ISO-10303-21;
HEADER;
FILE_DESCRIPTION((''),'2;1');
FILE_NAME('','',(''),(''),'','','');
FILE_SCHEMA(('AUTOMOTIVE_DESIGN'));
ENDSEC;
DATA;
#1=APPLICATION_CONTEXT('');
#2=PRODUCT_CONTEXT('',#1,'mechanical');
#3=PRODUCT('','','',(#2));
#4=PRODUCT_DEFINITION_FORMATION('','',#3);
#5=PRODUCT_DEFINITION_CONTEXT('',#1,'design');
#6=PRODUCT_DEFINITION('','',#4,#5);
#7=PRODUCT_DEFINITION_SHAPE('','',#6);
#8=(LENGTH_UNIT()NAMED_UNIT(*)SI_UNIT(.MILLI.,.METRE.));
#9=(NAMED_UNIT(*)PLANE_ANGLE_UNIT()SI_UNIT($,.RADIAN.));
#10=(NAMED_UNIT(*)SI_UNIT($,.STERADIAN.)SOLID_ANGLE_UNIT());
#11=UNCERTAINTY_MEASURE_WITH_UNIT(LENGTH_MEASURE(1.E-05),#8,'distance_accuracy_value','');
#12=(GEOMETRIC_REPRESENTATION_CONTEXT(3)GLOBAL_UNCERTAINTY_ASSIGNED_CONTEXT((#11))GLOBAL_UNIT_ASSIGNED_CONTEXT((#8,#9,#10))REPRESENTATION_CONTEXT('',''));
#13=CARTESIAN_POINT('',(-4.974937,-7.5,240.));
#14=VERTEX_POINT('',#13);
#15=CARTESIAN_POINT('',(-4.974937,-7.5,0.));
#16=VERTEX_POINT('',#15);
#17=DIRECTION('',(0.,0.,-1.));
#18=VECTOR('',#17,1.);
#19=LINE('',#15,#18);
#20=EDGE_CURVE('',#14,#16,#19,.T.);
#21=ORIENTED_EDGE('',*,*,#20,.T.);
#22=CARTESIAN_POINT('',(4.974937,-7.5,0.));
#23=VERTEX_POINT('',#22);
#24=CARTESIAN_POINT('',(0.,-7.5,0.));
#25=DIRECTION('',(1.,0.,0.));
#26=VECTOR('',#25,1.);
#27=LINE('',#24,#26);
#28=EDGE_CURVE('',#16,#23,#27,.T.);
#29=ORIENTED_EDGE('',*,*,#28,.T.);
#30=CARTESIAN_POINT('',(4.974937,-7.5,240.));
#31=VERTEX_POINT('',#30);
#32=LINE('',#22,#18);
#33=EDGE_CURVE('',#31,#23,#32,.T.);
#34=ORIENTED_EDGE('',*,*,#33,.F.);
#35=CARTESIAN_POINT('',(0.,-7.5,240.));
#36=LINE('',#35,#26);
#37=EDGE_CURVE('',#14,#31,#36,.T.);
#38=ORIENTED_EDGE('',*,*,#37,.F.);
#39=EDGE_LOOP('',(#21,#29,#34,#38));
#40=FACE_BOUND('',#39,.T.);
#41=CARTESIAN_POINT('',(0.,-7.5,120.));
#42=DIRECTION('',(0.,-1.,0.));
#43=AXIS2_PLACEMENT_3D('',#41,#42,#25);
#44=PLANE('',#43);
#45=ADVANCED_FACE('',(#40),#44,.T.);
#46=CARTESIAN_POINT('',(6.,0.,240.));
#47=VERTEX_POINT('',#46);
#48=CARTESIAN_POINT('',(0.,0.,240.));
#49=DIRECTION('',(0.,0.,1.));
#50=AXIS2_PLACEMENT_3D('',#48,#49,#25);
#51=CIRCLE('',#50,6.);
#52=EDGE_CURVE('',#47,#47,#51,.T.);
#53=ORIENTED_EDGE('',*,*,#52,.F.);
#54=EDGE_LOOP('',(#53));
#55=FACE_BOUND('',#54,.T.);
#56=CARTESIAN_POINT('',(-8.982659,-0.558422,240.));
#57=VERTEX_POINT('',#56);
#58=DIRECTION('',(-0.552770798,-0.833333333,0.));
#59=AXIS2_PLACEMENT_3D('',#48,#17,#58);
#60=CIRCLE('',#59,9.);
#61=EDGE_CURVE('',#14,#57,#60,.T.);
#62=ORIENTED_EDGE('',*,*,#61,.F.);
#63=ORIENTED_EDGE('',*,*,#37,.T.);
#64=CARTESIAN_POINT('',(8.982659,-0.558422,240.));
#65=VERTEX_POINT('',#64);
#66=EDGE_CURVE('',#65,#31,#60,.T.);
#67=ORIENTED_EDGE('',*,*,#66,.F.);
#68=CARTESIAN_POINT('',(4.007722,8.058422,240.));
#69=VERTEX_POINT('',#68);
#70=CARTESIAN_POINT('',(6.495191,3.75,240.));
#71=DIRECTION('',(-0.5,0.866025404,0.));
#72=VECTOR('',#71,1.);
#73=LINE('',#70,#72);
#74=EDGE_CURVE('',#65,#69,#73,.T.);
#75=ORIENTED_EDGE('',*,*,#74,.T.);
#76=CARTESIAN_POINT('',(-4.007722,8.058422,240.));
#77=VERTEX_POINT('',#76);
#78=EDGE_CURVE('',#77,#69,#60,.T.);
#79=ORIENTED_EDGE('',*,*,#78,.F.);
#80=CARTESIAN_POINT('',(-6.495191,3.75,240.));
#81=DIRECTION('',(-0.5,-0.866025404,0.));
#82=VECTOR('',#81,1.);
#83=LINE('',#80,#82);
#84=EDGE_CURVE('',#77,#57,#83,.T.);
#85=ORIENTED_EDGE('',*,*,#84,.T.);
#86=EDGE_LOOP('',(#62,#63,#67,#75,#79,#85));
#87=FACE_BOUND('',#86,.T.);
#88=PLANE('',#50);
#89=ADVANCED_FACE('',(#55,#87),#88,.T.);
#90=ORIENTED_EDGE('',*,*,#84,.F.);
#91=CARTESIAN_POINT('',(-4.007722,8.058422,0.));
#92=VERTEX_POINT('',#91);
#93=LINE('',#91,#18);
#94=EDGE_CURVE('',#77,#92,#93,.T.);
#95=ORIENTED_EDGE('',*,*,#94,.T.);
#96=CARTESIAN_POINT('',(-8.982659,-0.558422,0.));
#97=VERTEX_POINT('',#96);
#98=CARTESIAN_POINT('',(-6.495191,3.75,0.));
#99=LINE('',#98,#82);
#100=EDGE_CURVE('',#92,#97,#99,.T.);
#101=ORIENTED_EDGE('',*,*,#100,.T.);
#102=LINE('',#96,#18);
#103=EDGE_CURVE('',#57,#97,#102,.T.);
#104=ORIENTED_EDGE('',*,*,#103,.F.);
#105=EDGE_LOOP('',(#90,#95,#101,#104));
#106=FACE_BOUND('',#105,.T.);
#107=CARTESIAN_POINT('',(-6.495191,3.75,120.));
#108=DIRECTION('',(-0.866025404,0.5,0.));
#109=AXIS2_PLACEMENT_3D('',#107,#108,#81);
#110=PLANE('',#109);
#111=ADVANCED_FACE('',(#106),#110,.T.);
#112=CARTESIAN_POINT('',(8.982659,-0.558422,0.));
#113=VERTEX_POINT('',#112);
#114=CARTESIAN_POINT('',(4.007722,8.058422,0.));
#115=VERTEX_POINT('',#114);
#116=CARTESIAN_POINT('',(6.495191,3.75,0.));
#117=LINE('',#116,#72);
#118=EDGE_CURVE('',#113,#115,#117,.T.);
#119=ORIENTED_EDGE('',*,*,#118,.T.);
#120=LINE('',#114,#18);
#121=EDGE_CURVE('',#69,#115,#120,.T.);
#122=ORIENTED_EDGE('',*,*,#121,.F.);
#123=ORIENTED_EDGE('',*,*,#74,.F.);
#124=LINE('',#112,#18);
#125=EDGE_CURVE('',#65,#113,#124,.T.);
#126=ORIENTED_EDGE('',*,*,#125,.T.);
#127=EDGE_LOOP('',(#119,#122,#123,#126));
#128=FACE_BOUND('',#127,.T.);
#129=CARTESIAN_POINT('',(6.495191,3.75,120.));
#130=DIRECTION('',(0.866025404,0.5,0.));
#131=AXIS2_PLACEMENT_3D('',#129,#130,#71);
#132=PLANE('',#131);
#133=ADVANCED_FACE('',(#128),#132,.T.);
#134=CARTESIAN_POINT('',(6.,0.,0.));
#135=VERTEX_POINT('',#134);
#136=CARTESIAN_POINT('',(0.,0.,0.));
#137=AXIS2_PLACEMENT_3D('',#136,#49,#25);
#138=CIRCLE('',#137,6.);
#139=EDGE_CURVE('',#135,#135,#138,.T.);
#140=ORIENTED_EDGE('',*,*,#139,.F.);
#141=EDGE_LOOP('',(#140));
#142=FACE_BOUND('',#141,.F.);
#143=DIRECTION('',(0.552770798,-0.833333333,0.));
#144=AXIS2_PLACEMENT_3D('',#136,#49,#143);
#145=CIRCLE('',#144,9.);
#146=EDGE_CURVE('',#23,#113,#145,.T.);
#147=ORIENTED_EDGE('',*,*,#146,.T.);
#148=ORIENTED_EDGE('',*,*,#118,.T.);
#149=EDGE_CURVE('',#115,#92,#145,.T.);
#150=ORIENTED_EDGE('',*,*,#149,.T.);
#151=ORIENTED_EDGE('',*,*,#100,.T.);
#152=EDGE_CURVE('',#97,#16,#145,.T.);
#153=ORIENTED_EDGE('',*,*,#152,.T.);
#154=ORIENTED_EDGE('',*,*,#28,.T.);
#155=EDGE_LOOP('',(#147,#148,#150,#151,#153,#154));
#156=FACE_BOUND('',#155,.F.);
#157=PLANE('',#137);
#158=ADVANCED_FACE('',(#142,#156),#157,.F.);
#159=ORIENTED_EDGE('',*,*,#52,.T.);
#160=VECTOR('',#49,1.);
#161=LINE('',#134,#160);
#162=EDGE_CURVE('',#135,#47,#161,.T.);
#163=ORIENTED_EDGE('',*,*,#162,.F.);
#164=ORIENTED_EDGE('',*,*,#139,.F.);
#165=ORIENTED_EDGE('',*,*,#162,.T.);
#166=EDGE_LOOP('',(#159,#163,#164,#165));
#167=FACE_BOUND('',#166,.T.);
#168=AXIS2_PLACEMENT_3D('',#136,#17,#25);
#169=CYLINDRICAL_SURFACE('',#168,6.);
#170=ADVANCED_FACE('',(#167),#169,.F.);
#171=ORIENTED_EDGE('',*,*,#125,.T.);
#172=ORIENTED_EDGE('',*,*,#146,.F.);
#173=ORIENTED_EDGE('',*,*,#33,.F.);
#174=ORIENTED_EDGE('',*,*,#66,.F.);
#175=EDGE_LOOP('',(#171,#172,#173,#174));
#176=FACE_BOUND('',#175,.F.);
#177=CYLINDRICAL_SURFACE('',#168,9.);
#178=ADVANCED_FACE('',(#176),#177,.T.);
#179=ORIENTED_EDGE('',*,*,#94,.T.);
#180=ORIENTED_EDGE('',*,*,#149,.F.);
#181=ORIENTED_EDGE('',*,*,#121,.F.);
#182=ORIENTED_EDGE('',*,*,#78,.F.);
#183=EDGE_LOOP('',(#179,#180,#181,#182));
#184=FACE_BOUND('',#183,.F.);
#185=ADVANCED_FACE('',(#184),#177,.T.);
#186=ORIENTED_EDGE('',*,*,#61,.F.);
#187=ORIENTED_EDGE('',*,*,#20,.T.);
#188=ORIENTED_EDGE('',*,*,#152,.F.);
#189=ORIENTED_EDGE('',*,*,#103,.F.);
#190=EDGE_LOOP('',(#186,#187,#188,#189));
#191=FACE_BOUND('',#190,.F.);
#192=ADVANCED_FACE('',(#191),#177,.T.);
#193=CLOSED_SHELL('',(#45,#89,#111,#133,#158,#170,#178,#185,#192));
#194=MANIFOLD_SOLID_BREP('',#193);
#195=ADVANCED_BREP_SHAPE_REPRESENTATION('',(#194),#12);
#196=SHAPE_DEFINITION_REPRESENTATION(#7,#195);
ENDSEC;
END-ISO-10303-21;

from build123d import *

# Parameters (mm, degrees)
F0_R            = 9
F0_R_2          = 6
F1_DEPTH        = 240
F3_W            = 18
F3_H            = 240
F4_DEPTH        = 1.5
F4_COPIES_COUNT = 3


# Not quite as in the source:
# - a pattern or mirror of a feature is missing from the dataset's text; its kind, count and spacing are read off the source's solid


with BuildPart() as f1:
    # F0 (on Top) → F1 (new body)
    with BuildSketch(Plane.XY):
        Circle(F0_R)
        Circle(F0_R_2, mode=Mode.SUBTRACT)
    extrude(amount=F1_DEPTH)

    # F3 (on offset) → F4 (cut)
    with BuildSketch(Plane.XZ.offset(9)):
        with Locations((0, 120)):
            Rectangle(F3_W, F3_H)
    f4 = extrude(amount=-F4_DEPTH, mode=Mode.SUBTRACT)

    # F4_copies: F4 ×3 about axis
    f4_copies_axis = Axis((0, 0, 0), (0, 0, 1))
    for i in range(1, F4_COPIES_COUNT):
        add(f4.rotate(f4_copies_axis, i * 360 / F4_COPIES_COUNT), mode=Mode.SUBTRACT)


solid = f1.part
